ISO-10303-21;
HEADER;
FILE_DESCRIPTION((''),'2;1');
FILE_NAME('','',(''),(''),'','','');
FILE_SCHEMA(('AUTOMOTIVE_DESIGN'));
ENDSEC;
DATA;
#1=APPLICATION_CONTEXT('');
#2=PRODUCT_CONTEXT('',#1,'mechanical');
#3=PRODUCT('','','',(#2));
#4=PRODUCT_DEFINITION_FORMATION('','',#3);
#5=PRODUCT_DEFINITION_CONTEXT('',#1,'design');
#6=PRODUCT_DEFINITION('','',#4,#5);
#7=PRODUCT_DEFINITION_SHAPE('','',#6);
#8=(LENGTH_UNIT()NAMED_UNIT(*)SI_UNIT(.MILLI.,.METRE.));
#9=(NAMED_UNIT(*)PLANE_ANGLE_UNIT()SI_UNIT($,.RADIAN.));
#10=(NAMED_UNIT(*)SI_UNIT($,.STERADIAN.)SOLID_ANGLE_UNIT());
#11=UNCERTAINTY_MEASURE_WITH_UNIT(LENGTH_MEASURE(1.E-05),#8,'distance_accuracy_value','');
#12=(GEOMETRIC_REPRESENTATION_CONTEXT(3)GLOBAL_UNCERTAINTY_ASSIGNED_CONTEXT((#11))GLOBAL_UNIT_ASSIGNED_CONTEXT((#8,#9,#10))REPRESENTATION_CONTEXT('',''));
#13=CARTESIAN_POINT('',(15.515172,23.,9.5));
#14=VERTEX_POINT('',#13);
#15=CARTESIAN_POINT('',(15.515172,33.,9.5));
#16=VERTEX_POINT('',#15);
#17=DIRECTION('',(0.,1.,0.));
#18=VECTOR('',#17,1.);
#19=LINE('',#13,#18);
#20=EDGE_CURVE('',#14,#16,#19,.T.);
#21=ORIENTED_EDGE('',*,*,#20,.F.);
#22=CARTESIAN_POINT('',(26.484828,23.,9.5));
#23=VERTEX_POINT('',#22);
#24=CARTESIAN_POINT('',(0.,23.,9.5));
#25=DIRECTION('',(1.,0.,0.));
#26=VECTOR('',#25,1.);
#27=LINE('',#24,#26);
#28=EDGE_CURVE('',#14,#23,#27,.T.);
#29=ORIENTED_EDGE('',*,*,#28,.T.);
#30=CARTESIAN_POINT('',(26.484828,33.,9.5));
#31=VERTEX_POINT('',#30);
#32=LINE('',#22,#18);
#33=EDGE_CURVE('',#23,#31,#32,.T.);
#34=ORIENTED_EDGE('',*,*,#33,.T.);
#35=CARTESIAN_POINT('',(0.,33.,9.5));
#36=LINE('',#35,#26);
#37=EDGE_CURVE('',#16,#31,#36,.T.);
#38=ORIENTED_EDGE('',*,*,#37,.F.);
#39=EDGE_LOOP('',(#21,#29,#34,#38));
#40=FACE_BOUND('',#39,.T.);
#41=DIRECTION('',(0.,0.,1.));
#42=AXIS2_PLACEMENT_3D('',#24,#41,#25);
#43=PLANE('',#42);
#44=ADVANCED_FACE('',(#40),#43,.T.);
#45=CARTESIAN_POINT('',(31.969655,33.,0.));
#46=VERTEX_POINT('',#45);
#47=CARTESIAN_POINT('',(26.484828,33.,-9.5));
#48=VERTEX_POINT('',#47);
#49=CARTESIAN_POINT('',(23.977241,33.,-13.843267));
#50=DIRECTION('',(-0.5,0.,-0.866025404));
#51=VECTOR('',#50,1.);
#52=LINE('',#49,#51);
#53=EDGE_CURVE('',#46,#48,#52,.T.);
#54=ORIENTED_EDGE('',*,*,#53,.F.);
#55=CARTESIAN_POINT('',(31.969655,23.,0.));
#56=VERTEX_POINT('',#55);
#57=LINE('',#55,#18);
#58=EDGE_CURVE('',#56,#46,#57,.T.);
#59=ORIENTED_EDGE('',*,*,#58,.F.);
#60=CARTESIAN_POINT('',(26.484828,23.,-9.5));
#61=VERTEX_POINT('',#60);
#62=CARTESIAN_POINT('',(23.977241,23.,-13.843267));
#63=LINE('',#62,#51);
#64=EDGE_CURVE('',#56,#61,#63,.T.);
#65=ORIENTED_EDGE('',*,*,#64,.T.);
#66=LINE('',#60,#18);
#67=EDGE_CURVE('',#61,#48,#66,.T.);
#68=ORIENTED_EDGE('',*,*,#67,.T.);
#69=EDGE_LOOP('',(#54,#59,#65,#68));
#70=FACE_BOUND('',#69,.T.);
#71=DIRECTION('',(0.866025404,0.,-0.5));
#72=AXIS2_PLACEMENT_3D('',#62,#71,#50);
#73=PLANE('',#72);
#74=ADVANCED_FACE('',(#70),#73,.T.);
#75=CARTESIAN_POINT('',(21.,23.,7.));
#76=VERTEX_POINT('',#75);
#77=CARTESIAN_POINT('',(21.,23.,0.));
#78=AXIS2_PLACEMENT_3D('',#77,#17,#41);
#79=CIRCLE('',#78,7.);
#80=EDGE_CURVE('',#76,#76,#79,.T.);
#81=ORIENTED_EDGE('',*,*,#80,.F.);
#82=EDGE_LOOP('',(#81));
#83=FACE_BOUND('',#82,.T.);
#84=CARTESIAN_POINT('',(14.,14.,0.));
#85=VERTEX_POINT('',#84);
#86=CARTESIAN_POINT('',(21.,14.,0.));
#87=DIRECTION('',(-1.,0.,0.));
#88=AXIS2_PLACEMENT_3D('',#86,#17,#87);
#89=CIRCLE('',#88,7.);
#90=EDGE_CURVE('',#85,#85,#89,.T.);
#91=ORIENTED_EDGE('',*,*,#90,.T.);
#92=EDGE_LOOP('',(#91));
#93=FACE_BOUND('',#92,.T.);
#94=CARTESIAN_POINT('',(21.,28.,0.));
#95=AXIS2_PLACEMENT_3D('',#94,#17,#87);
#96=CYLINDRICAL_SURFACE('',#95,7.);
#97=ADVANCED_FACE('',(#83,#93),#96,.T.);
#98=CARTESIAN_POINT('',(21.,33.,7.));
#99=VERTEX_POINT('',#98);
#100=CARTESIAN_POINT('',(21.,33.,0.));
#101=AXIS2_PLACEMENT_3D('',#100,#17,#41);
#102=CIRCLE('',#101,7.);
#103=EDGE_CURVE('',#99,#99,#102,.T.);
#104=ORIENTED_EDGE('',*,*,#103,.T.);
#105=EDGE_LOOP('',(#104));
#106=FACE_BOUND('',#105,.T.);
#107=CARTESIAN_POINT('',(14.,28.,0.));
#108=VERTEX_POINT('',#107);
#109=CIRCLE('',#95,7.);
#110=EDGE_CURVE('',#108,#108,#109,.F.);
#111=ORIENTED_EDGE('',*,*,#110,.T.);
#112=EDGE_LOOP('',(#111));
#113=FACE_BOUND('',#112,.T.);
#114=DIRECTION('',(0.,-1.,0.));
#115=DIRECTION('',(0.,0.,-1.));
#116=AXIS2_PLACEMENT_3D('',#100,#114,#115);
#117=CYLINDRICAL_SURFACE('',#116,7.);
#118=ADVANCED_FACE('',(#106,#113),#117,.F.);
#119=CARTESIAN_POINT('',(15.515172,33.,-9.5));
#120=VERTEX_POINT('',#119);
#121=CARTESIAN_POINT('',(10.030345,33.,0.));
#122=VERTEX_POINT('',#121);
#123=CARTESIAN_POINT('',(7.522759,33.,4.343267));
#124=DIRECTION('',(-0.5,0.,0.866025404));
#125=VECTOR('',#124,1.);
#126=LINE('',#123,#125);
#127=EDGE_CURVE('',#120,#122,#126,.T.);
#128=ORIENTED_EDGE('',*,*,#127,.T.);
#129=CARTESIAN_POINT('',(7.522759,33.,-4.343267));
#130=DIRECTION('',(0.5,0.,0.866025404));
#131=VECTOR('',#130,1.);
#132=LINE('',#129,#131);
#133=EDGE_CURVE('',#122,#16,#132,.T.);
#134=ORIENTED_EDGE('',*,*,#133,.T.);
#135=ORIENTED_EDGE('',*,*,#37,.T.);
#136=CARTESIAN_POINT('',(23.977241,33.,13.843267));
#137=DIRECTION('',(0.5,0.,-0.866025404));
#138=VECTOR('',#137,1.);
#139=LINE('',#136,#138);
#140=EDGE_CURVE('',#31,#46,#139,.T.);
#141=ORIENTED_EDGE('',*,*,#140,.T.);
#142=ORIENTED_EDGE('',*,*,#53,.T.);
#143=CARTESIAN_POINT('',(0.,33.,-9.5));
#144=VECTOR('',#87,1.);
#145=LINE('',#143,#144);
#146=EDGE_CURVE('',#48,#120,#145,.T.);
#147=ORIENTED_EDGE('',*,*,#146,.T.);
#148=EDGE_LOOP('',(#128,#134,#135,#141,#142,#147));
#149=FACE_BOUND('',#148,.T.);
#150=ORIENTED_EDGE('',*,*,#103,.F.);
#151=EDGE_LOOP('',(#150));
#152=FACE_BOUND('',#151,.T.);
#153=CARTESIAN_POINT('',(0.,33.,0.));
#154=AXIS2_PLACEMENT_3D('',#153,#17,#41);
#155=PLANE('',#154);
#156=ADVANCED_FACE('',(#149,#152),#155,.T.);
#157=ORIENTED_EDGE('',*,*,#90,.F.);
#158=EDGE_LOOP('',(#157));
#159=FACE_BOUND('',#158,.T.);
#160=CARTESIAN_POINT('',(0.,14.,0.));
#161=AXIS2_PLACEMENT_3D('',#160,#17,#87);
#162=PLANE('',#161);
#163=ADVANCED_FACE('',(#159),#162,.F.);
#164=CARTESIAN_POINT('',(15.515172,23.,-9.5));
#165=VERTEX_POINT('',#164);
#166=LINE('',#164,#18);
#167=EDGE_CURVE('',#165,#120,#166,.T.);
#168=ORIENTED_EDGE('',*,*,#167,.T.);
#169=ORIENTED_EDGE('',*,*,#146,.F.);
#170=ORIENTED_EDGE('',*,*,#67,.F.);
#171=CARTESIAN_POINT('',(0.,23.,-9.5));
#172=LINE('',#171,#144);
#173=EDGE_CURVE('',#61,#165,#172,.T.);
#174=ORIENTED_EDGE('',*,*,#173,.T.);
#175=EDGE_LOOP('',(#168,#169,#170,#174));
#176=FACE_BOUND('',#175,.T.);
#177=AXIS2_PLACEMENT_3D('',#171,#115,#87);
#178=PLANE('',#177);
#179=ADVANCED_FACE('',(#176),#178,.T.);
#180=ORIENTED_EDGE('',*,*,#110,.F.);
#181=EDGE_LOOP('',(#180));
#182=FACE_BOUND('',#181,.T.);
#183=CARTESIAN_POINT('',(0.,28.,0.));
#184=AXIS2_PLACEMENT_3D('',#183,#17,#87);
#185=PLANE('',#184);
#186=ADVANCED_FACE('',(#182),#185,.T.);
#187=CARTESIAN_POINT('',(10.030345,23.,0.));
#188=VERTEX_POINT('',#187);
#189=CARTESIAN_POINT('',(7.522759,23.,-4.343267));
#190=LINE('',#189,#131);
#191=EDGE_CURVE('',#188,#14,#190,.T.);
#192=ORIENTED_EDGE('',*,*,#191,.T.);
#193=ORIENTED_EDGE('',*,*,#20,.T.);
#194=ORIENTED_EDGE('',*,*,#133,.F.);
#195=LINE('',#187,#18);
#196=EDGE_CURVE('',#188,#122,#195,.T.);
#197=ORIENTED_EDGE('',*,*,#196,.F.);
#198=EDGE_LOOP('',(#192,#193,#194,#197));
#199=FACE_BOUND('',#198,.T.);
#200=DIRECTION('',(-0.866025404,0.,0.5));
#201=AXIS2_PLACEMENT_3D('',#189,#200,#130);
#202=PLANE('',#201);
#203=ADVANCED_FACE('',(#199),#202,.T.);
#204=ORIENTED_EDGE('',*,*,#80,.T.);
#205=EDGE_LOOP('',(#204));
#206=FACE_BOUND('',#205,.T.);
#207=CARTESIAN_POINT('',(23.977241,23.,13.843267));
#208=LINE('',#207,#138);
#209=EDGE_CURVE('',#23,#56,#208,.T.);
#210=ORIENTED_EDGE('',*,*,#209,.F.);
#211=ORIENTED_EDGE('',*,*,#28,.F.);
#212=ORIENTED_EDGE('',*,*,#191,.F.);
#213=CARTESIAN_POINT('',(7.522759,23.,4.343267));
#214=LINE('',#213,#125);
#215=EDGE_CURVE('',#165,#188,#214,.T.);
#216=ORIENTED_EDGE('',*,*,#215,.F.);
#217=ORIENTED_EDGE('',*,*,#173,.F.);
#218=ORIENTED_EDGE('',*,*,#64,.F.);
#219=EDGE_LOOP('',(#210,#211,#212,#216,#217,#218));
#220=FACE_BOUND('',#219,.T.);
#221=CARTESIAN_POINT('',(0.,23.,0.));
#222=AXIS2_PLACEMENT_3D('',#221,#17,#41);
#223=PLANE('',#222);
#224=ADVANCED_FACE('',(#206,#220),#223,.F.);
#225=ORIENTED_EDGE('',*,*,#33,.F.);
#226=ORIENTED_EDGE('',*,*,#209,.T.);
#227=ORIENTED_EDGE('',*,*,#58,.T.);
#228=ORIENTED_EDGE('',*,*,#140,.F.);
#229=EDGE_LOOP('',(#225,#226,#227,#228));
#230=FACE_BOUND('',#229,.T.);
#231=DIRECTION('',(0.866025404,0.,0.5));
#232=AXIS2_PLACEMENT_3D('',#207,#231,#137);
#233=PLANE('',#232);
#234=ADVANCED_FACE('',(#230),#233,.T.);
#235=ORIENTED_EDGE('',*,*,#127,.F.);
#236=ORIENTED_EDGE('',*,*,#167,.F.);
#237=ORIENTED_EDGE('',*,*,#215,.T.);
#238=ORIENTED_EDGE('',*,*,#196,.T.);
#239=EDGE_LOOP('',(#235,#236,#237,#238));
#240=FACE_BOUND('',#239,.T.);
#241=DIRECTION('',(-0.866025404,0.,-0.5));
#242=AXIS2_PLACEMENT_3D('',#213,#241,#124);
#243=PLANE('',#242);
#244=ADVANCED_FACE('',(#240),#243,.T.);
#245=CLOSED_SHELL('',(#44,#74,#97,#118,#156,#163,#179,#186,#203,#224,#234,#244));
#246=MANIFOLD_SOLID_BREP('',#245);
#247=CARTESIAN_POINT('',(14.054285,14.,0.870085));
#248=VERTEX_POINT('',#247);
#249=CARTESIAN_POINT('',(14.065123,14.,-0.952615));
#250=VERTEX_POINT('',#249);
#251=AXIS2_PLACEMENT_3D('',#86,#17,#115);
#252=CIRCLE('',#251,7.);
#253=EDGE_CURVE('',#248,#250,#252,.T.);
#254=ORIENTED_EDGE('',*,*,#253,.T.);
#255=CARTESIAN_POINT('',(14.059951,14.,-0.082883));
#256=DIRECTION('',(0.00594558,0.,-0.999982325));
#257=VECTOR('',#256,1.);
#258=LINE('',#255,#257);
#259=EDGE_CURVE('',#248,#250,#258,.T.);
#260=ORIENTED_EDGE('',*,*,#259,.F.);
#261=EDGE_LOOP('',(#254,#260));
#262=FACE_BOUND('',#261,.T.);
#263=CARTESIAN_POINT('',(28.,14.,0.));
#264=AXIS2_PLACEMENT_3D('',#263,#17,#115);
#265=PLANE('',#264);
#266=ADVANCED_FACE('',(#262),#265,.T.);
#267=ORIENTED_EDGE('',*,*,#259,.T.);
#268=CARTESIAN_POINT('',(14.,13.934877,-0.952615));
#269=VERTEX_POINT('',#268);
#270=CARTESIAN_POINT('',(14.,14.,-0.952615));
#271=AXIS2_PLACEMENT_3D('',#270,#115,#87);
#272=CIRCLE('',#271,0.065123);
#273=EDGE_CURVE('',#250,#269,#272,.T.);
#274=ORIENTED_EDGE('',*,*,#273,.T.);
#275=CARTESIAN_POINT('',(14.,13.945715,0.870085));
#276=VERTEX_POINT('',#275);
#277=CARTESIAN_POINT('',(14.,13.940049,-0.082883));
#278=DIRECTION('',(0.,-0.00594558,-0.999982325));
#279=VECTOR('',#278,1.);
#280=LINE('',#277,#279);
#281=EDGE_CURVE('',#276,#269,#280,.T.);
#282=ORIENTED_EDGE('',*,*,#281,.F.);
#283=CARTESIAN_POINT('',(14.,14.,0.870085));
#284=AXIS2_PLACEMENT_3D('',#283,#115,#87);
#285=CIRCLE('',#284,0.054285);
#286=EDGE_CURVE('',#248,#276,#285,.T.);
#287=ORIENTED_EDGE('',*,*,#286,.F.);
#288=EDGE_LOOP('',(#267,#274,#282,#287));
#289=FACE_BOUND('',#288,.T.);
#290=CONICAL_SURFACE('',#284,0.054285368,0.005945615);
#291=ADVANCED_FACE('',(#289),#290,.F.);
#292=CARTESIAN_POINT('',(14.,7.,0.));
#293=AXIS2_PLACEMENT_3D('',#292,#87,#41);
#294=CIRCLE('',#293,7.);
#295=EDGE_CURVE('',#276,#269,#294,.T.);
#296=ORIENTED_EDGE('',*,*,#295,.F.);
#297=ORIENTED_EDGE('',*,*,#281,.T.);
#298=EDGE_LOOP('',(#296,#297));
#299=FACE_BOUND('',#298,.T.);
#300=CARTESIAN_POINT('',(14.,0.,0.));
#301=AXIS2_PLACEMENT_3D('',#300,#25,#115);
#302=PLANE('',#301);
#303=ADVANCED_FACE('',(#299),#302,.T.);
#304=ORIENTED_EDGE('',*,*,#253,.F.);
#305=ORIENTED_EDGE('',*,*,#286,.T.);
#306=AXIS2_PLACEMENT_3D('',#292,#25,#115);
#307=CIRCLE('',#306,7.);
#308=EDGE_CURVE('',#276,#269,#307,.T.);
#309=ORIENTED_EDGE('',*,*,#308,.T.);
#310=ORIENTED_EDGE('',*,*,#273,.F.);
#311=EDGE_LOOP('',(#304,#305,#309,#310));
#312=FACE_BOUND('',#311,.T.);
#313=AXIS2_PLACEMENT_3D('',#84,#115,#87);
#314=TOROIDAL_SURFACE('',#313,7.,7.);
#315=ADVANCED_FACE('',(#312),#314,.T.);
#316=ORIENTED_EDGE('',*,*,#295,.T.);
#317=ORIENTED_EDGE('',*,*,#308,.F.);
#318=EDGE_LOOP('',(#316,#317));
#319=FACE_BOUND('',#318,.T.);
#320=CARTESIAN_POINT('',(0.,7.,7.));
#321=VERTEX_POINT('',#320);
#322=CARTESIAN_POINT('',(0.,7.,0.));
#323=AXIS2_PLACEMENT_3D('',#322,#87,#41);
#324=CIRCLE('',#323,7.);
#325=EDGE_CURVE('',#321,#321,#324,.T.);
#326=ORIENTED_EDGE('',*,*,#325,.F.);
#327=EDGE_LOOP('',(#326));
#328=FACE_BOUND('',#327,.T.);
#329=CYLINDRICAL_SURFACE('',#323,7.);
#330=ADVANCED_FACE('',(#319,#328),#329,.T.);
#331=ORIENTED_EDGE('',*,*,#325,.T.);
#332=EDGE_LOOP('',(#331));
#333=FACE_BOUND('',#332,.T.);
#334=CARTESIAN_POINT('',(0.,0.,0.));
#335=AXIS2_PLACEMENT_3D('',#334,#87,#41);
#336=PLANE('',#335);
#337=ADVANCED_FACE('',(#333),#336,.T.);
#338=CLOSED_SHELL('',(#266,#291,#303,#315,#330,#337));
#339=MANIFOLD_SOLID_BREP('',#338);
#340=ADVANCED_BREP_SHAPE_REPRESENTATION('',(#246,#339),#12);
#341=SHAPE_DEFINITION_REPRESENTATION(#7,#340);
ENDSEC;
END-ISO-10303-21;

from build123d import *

# Parameters (mm, degrees)
SZKIC1_W                         = 7
SZKIC1_H                         = 14
OBR_T10_ANGLE                    = 90
DODANIE_WYCI_GNI_CIE1_DEPTH      = 5
DODANIE_WYCI_GNI_CIE1_DEPTH_BACK = 5
SZKIC7_R                         = 7


with BuildPart() as part:
    # Szkic1 → Obrót1 (revolve)
    with BuildSketch(Plane.XY):
        with Locations((24.5, 21)):
            Rectangle(SZKIC1_W, SZKIC1_H)
    revolve(axis=Axis((21, 28, 0), (0, -1, 0)))

    # Szkic7 → Dodanie-wyciągnięcie1 (add, two sides: drawn at the far end of the back side and taken through both)
    with BuildSketch(Plane(origin=(0, 28, 0), x_dir=(1, 0, 0), z_dir=(0, 1, 0)).offset(-DODANIE_WYCI_GNI_CIE1_DEPTH_BACK)):
        Polygon((15.515172443, 9.5), (10.030344885, 0), (15.515172443, -9.5), (26.484827557, -9.5), (31.969655115, 0), (26.484827557, 9.5), align=None)
        with Locations((21, 0)):
            Circle(SZKIC7_R, mode=Mode.SUBTRACT)
    extrude(amount=DODANIE_WYCI_GNI_CIE1_DEPTH + DODANIE_WYCI_GNI_CIE1_DEPTH_BACK)


with BuildPart() as body_2:
    # Szkic1<4> → Obrót2 (revolve)
    with BuildSketch(Plane.XY):
        Polygon((0, 7), (14, 7), (14, 14), (0, 14), (0, 12), align=None)
    revolve(axis=Axis((0, 7, 0), (1, 0, 0)))

    # Szkic5 → Obrót10 (revolve)
    with BuildSketch(Plane(origin=(14, 0, 0), x_dir=(0, 0, -1), z_dir=(1, 0, 0))):
        with BuildLine():
            Line((0.952614833, 13.934877431), (-0.8700852, 13.945714632))
            ThreePointArc((-0.8700852, 13.945714632), (-4.631922041, 1.751638522), (7, 7))
            ThreePointArc((7, 7), (5.275808177, 11.600635617), (0.952614833, 13.934877431))
        make_face()
    revolve(axis=Axis((14, 14, 8.415380056), (0, 0, 1)), revolution_arc=OBR_T10_ANGLE)


solid = Compound([part.part, body_2.part])
